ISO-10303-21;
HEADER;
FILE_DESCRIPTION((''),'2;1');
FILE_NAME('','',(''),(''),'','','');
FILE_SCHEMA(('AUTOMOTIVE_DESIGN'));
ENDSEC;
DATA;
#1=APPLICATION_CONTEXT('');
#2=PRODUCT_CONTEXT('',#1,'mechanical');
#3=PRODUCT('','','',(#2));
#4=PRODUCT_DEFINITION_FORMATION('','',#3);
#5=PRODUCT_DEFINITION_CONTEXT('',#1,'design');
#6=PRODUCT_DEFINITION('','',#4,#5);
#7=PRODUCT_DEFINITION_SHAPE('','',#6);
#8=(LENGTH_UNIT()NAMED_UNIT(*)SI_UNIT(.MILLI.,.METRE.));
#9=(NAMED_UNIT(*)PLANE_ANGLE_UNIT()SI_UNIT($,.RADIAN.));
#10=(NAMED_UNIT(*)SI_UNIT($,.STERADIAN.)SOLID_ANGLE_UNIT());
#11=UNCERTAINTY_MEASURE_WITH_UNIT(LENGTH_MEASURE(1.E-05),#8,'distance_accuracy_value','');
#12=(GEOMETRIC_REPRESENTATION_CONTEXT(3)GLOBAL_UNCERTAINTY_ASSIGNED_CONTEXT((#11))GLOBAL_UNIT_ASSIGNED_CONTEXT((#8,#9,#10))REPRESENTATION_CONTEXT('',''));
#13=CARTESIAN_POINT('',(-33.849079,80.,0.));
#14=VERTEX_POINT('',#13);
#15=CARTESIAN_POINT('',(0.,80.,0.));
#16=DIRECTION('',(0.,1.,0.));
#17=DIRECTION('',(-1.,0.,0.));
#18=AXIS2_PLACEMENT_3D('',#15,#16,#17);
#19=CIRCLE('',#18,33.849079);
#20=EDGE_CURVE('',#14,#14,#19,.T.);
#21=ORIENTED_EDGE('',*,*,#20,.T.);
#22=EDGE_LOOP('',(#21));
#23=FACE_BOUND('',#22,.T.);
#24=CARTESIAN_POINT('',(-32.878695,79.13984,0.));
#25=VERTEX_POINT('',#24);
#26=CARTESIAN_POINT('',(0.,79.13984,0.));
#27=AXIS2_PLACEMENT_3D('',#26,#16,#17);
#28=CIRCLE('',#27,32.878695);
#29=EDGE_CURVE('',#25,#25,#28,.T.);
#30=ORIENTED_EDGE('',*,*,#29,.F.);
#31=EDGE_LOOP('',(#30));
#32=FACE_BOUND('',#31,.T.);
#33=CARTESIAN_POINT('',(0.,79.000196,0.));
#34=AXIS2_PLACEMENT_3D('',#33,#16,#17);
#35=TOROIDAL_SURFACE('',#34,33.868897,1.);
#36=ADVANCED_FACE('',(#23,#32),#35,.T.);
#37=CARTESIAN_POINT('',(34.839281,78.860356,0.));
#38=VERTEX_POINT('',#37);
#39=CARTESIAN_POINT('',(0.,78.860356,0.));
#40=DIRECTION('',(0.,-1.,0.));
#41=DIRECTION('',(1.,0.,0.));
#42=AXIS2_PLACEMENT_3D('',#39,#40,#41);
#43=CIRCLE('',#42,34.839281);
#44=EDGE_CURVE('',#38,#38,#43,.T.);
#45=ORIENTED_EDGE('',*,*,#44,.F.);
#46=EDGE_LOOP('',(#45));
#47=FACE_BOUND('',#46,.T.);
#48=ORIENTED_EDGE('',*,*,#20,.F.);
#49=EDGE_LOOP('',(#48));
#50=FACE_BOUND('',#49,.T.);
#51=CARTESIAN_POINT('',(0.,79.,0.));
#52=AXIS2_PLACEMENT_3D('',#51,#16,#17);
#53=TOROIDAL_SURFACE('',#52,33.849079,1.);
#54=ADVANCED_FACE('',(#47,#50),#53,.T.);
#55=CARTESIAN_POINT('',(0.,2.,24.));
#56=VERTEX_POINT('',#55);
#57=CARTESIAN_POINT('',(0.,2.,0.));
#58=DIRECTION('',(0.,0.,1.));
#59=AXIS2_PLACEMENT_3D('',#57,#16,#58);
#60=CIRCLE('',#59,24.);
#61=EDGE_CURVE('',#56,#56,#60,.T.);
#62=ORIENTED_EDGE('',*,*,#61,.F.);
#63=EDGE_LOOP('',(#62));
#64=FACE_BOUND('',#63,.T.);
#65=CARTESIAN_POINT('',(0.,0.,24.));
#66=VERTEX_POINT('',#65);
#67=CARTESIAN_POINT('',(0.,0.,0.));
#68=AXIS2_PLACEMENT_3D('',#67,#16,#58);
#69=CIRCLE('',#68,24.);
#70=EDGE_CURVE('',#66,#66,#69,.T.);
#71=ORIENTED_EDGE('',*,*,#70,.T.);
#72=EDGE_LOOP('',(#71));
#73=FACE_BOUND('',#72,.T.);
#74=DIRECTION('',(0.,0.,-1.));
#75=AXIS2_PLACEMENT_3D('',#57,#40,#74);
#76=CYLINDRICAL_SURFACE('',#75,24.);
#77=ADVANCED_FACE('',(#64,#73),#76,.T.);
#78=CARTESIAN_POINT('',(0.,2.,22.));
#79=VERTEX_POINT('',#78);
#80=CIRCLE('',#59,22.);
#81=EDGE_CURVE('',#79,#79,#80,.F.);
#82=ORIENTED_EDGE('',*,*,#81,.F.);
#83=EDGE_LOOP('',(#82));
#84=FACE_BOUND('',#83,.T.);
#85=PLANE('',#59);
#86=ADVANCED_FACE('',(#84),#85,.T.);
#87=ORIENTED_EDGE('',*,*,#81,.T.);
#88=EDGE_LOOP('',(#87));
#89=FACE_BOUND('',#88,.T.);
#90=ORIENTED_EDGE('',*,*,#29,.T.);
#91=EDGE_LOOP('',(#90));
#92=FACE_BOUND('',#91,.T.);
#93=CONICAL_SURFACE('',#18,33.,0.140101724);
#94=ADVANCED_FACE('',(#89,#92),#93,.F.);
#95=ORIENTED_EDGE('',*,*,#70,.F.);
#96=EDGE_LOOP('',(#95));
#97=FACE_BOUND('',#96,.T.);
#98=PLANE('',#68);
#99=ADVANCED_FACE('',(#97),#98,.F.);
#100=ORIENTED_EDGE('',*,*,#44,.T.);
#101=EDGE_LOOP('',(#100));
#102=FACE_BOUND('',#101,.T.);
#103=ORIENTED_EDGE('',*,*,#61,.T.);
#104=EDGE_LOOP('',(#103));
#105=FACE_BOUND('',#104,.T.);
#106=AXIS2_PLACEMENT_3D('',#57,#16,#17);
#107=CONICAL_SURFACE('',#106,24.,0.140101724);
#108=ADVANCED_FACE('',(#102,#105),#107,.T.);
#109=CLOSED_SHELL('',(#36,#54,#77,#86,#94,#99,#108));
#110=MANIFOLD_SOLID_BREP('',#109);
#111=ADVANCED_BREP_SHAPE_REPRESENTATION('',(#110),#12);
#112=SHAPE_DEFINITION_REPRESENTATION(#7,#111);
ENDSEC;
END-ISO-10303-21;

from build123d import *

# Parameters (mm, degrees)
CROQUIS1_R              = 24
SALIENTE_EXTRUIR1_DEPTH = 2
REDONDEO1_R             = 1
REDONDEO2_R             = 1


with BuildPart() as part:
    # Croquis1 → Saliente-Extruir1 (new body)
    with BuildSketch(Plane(origin=(0, 0, 0), x_dir=(1, 0, 0), z_dir=(0, 1, 0))):
        with Locations(Location((0, 0, 0), (0, 0, 270))):
            Circle(CROQUIS1_R)
    extrude(amount=SALIENTE_EXTRUIR1_DEPTH)

    # Croquis2 → Revolución1 (revolve)
    with BuildSketch(Plane.XY, mode=Mode.PRIVATE) as revoluci_n1_sk:
        Polygon((24, 2), (35, 80), (33, 80), (22, 2), align=None)
    revolve(revoluci_n1_sk.sketch.rotate(Axis((0, 2, 0), (0, 1, 0)), 270), axis=Axis((0, 2, 0), (0, 1, 0)))

    # Redondeo1
    redondeo1_edges = [part.edges().sort_by_distance(p)[0] for p in [
        (0, 80, -35),
    ]]
    fillet(redondeo1_edges, radius=REDONDEO1_R)

    # Redondeo2
    # the kernel refuses this fillet: 1 mm, written as the material it takes off along each edge
    with BuildSketch(Plane(origin=(0, 80, 0), x_dir=(0, 0, 1), z_dir=(-1, 0, 0))) as redondeo2_piece_1:
        with BuildLine():
            CenterArc((33 + REDONDEO2_R * 0.868869517606, -REDONDEO2_R), REDONDEO2_R, 90, 81.97276249)
            Line((33 - REDONDEO2_R * 0.121332278545, -REDONDEO2_R * 0.860356156953), (33, 0))
            Line((33, 0), (33 + REDONDEO2_R * 0.868869517606, 0))
        make_face()
    revolve(axis=Axis((0, 80, 0), (0, 1, 0)), mode=Mode.SUBTRACT)


solid = part.part
